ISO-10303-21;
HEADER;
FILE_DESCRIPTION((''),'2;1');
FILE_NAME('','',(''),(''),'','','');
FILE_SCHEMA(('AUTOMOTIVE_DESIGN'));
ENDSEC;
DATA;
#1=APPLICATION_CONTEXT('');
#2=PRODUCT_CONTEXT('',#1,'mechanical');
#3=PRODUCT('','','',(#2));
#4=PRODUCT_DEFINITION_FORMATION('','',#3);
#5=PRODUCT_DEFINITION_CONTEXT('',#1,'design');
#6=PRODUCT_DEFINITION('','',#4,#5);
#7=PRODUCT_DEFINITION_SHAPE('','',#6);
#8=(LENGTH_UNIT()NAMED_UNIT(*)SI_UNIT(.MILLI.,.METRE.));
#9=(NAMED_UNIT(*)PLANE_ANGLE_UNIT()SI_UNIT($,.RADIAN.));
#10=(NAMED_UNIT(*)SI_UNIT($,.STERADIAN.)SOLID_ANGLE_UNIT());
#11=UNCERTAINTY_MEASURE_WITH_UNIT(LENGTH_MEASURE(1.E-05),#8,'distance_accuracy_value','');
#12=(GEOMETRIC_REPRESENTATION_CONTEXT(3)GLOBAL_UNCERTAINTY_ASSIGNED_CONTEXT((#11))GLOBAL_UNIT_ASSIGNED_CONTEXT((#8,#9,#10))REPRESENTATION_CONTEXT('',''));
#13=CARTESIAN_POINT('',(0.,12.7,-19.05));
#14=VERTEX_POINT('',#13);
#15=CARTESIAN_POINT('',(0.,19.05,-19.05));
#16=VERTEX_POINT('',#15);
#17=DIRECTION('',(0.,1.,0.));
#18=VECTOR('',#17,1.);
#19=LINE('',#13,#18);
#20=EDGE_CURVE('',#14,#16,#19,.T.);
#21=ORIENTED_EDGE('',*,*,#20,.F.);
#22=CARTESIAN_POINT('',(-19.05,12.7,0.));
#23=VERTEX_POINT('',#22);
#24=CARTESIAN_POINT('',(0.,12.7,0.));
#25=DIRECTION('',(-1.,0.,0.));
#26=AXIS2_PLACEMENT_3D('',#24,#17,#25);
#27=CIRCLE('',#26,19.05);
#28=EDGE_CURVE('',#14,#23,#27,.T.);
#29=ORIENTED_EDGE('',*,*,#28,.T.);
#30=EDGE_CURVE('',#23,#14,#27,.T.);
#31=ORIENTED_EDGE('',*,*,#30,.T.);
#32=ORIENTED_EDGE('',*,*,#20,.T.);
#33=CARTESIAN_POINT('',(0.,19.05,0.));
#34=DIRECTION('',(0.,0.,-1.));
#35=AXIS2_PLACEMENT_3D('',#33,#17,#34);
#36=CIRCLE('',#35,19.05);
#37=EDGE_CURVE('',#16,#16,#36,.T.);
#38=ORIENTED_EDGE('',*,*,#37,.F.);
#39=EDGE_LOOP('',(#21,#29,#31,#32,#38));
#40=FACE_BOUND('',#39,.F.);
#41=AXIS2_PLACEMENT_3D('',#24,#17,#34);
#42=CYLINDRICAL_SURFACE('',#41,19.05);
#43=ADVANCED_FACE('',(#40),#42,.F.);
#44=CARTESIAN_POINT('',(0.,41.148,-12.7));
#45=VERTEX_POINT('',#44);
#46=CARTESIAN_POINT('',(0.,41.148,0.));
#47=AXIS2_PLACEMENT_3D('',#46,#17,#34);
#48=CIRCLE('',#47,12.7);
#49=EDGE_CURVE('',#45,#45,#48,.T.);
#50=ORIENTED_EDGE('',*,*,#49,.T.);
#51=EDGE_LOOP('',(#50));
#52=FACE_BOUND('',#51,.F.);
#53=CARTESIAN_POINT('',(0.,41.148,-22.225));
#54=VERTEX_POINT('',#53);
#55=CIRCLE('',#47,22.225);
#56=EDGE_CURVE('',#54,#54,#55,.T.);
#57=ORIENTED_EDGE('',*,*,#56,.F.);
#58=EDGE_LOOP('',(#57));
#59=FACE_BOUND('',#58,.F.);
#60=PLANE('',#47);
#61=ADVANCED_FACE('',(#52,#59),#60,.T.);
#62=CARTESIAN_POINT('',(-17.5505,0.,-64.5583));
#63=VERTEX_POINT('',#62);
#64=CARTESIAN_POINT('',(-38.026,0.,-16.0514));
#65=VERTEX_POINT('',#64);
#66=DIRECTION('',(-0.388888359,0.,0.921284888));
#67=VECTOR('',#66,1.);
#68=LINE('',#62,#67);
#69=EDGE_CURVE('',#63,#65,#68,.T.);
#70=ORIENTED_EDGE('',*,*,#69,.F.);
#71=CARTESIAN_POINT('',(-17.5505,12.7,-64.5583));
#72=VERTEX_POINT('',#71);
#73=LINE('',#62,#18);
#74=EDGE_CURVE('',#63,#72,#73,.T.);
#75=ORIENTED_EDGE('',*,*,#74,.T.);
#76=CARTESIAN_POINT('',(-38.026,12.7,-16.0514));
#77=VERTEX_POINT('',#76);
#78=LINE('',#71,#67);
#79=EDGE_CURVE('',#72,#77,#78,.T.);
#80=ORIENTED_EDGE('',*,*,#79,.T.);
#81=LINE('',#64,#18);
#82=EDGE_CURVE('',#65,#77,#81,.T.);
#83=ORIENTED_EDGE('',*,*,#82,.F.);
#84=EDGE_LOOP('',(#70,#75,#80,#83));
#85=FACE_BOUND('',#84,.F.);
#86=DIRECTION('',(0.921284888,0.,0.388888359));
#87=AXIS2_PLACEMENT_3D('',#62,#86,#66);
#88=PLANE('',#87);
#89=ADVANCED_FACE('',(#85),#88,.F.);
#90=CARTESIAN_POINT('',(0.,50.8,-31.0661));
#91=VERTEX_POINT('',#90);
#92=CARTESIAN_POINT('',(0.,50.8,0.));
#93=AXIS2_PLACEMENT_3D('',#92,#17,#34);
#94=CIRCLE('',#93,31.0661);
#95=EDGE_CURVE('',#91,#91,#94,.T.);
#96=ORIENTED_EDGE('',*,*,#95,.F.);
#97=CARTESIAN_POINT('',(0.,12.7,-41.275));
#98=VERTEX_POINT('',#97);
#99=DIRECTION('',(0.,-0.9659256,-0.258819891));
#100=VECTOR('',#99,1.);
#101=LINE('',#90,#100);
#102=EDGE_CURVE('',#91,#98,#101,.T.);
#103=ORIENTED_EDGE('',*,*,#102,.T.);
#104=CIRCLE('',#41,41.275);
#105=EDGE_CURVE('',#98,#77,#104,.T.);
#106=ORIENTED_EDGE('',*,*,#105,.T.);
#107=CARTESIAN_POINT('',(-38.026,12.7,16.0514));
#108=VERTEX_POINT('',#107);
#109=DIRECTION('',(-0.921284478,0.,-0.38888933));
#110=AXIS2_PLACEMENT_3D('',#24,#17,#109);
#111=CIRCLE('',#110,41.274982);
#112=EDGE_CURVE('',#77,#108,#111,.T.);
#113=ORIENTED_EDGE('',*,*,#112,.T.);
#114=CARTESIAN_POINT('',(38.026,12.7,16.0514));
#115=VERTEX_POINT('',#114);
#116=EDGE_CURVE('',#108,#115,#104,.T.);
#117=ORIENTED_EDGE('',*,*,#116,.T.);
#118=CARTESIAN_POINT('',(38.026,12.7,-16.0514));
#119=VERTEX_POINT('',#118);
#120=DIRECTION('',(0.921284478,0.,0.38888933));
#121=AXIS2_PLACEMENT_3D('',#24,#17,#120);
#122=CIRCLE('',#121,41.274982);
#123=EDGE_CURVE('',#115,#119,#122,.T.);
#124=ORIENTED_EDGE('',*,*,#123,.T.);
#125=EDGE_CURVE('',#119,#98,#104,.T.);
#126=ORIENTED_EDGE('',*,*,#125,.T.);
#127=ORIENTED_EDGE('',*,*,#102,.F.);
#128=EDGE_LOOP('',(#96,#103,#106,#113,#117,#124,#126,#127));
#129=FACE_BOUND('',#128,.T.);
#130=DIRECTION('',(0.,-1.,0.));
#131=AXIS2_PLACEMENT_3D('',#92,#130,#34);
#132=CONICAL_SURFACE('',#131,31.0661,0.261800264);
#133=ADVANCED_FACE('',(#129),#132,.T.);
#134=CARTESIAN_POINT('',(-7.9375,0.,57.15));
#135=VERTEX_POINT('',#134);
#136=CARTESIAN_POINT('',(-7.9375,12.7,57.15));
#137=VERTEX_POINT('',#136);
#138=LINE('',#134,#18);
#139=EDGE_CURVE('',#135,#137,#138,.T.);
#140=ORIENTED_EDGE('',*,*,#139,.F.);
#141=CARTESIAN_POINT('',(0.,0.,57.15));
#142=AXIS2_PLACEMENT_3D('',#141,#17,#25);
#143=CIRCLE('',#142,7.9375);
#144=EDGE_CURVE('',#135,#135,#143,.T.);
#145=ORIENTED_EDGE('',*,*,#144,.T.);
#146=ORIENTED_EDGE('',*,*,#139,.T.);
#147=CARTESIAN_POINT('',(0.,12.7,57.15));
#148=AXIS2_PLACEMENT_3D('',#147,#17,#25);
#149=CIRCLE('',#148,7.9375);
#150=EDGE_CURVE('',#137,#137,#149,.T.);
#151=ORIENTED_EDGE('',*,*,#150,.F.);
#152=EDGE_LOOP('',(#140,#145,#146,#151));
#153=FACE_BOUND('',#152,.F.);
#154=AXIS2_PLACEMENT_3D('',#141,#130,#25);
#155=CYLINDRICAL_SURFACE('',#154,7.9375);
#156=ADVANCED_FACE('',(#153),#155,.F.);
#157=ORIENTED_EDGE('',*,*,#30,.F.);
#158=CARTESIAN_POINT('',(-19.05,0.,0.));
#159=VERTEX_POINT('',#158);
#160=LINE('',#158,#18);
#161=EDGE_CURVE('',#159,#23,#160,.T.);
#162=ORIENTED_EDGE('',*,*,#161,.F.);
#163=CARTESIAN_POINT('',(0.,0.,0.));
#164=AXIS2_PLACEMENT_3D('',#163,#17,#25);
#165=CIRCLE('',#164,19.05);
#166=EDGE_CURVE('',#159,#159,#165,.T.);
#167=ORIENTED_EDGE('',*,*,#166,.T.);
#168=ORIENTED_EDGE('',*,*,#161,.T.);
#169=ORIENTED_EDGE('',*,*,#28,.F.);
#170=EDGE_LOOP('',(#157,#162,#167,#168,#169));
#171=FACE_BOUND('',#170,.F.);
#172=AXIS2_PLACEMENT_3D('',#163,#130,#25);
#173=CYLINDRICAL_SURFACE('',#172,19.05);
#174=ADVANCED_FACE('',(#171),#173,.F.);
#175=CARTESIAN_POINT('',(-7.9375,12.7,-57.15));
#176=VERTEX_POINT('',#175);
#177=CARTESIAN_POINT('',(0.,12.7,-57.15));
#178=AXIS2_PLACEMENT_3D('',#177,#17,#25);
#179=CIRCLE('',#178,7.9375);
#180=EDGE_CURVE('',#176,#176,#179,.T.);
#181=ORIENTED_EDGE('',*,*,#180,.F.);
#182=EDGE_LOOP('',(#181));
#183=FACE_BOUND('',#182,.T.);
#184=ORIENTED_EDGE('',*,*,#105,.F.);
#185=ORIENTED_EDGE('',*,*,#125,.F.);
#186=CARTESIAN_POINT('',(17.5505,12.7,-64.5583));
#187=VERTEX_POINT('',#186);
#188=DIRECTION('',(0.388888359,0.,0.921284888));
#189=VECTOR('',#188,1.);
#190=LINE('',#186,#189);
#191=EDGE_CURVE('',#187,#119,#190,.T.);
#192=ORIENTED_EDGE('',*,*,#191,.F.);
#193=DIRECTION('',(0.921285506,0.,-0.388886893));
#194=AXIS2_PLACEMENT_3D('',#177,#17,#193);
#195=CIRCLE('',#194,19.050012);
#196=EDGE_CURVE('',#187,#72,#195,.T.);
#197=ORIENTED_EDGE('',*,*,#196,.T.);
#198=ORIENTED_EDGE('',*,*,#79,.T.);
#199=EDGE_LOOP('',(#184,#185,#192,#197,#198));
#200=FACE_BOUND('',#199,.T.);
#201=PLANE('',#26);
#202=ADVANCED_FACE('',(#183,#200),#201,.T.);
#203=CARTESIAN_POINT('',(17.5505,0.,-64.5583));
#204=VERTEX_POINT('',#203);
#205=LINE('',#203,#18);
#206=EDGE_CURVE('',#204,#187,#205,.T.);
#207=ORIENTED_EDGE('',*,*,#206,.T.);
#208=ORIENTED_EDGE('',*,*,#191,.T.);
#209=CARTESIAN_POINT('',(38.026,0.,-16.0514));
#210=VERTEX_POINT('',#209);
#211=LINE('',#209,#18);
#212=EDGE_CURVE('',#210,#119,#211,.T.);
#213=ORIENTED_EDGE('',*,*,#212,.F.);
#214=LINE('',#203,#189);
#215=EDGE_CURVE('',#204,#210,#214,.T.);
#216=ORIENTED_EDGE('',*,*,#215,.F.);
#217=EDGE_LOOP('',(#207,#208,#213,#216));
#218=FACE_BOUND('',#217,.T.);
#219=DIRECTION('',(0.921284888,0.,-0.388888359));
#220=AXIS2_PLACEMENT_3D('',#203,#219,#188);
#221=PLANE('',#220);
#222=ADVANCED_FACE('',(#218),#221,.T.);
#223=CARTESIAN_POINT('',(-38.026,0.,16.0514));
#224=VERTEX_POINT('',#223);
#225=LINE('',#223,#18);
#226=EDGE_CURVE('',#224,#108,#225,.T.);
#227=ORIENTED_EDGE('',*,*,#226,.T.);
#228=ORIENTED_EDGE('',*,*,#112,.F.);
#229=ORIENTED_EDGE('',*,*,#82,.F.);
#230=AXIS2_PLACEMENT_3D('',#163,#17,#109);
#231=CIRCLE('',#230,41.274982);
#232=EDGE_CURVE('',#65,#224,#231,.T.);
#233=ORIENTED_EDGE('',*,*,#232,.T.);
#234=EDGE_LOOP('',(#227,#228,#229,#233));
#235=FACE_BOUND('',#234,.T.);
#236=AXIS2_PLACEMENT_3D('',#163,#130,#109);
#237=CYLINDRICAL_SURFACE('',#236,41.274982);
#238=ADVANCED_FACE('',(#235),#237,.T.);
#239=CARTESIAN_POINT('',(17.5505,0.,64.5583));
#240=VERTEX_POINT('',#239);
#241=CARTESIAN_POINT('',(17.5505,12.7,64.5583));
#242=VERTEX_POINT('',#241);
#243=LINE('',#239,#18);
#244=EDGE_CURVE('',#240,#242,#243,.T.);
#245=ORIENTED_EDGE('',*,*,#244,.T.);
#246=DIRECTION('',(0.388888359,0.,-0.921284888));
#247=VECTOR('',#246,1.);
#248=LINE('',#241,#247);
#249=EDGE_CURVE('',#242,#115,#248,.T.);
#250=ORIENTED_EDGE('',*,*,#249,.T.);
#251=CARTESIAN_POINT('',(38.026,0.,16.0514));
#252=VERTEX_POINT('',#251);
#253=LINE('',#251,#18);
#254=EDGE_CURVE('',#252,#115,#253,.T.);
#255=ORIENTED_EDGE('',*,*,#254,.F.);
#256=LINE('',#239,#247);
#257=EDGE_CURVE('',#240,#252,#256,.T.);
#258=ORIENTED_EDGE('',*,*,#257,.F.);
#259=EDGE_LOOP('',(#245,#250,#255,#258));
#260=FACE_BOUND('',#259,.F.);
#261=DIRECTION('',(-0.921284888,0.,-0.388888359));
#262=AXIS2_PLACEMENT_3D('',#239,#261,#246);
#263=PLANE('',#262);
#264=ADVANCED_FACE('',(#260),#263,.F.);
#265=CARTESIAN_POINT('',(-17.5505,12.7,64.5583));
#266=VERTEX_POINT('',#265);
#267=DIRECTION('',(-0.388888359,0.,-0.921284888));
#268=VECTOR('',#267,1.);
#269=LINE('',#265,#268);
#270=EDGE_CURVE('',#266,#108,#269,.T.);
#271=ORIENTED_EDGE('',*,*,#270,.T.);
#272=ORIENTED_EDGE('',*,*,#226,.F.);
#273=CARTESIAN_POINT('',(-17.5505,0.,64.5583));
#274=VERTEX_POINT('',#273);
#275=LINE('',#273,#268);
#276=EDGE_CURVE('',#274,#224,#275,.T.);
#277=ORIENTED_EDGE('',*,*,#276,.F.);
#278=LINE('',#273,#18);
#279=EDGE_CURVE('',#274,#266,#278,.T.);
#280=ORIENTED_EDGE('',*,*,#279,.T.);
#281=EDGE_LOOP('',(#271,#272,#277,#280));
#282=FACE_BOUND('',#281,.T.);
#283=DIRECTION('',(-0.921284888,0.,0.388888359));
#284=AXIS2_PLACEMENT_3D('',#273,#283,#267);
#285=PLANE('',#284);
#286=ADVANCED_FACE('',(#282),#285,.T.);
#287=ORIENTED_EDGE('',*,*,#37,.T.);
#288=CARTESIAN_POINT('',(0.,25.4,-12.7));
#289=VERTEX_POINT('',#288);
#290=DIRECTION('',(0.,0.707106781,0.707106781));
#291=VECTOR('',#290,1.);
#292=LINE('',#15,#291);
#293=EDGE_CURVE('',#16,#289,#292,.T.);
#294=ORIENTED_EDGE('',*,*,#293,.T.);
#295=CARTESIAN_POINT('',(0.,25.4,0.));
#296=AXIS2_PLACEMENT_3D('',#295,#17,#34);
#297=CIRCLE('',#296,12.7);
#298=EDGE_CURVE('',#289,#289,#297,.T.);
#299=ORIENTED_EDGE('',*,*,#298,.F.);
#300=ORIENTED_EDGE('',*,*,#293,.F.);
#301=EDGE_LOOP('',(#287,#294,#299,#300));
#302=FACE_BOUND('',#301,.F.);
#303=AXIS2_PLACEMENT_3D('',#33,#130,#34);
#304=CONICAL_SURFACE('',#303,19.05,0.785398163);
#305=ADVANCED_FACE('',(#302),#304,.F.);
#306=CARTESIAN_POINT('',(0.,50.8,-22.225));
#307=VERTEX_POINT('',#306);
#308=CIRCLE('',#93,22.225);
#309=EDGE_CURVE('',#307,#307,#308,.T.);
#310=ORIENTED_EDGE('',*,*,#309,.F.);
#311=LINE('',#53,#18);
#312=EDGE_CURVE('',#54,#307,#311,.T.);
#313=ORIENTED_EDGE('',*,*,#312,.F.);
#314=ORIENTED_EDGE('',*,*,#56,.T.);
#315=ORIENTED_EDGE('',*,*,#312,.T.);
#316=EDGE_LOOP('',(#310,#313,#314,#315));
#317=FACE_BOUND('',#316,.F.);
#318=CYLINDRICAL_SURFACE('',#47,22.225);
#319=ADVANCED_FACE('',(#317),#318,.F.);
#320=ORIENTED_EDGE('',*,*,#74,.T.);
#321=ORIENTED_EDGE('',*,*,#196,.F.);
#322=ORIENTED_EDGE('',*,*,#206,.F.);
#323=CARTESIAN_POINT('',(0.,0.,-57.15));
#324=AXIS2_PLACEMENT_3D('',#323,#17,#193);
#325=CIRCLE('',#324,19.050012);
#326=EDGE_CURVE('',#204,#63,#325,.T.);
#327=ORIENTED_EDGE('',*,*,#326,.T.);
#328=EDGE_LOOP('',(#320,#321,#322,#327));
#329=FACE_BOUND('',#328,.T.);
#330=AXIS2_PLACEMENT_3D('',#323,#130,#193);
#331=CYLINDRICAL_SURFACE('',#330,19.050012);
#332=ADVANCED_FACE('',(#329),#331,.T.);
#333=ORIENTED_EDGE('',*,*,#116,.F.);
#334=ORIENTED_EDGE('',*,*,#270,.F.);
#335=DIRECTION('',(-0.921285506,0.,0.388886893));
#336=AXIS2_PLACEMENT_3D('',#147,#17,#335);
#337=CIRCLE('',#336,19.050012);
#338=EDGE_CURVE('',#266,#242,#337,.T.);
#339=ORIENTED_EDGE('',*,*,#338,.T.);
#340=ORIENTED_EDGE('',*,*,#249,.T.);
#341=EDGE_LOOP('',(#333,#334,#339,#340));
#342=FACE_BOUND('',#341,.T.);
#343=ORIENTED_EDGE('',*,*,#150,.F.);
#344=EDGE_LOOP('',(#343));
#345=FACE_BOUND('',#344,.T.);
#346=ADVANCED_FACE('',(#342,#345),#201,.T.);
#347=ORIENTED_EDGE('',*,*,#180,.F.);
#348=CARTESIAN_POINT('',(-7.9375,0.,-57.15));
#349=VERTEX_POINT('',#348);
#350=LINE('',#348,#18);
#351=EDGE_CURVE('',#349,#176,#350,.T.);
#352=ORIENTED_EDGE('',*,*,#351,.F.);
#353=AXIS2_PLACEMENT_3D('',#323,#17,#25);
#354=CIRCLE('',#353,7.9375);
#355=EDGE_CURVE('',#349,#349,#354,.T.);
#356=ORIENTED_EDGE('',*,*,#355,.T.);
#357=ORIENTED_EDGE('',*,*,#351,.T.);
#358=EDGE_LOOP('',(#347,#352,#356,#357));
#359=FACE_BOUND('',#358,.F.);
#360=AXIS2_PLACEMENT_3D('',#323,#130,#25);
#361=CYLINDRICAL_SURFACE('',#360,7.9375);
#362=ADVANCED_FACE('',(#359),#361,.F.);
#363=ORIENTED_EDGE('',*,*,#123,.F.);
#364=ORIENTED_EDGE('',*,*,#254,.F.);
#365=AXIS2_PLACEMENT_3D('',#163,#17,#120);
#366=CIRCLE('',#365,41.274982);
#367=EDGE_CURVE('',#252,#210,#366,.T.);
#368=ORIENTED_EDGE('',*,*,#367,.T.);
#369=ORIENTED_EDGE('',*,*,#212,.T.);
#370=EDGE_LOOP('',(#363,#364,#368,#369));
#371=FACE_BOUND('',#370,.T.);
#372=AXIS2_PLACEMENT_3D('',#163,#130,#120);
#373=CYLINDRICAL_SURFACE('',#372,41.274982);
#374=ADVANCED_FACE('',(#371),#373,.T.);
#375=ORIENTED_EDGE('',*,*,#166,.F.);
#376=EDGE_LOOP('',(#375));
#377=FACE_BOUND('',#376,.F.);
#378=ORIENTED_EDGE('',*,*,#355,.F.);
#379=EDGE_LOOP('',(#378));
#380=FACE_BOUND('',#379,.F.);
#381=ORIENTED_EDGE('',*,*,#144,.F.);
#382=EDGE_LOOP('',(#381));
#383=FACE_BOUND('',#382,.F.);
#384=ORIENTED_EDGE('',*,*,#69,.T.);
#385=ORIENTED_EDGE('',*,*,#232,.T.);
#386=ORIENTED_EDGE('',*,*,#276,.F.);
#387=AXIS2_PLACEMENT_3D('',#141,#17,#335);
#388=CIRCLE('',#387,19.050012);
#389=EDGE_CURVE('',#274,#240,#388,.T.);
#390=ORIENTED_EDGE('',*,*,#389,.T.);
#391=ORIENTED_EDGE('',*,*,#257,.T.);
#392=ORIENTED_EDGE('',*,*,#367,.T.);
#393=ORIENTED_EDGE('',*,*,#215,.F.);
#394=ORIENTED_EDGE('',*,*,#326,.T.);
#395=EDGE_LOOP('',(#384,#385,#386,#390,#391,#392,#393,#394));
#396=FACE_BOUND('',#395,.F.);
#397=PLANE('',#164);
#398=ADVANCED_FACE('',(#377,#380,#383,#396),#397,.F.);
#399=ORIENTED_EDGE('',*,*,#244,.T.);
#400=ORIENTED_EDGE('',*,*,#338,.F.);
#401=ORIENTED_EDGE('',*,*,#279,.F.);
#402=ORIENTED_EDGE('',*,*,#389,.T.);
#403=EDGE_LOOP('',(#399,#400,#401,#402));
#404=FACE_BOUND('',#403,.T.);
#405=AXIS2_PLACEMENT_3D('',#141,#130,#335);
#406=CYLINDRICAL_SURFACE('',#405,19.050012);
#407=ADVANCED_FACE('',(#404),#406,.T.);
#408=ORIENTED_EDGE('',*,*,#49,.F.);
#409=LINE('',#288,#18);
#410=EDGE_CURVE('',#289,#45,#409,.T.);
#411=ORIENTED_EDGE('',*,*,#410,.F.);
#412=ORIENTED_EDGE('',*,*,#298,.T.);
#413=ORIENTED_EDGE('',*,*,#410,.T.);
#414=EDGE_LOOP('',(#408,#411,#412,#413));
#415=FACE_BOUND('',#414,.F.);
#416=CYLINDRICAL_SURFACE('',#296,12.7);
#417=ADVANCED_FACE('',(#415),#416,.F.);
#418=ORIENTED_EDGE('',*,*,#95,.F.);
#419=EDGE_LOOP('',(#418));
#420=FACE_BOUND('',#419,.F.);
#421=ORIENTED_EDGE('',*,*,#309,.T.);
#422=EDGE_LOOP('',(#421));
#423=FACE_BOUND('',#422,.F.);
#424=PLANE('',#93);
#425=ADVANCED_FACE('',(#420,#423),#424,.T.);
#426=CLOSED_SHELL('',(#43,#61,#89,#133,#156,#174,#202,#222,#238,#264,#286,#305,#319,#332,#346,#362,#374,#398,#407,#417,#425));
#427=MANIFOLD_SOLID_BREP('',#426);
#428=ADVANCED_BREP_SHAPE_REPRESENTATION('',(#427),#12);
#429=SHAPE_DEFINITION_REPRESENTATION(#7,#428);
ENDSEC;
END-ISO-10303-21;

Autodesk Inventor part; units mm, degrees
ref_plane "YZ Plane" through (0, 0, 0) normal (1, 0, 0) x (0, 1, 0)
ref_plane "XZ Plane" through (0, 0, 0) normal (0, 1, 0) x (-1, 0, 0)
ref_plane "XY Plane" through (0, 0, 0) normal (0, 0, 1) x (1, 0, 0)
sketch "Sketch1" plane through (0, 0, 0) normal (0, 1, 0) x (-1, 0, 0)
  circle A0 centre (0, 0) radius 19.05
  circle A1 centre (0, 0) radius 41.275 construction
  line L0 (0, -57.15) -> (0, 57.15) construction
  circle A2 centre (0, -57.15) radius 7.9375
  line L1 (57.785, 0) -> (-57.785, 0) construction
  circle A3 centre (0, -57.15) radius 19.05 construction
  circle A4 centre (0, 57.15) radius 7.9375
  circle A5 centre (0, 57.15) radius 19.05 construction
  line L2 (-17.5505, -64.5583) -> (-38.026, -16.0514)
  line L3 (17.5505, -64.5583) -> (38.026, -16.0514)
  line L4 (-17.5505, 64.5583) -> (-38.026, 16.0514)
  line L5 (17.5505, 64.5583) -> (38.026, 16.0514)
  arc A6 (-17.5505, -64.5583) -> (17.5505, -64.5583) centre (0, -57.15) ccw
  arc A7 (17.5505, 64.5583) -> (-17.5505, 64.5583) centre (0, 57.15) ccw
  arc A8 (-38.026, 16.0514) -> (-38.026, -16.0514) centre (0, 0) ccw
  arc A9 (38.026, -16.0514) -> (38.026, 16.0514) centre (0, 0) ccw
  dimension "d1" = 82.55
  dimension "d4" = 38.1
  dimension "d0" = 38.1
  dimension "d2" = 114.3
  dimension "d3" = 15.875
extrude "Extrusion1" add sketch "Sketch1" along normal blind 12.7
sketch "Sketch2" plane through (0, 0, 0) normal (1, 0, 0) x (0, 1, 0)
  line L0 (0, -19.05) -> (12.7, -19.05) construction
  line L1 (12.7, -19.05) -> (19.05, -19.05)
  line L2 (19.05, -19.05) -> (25.4, -12.7)
  line L3 (25.4, -12.7) -> (41.148, -12.7)
  line L4 (41.148, -12.7) -> (41.148, -22.225)
  line L5 (41.148, -22.225) -> (50.8, -22.225)
  line L6 (50.8, -22.225) -> (50.8, -31.0661)
  line L7 (50.8, -31.0661) -> (12.7, -41.275)
  line L8 (12.7, -64.5583) -> (12.7, -16.0514) construction
  line L9 (0, -16.0514) -> (0, -64.5583) construction
  line L10 (12.7, -19.05) -> (12.7, -41.275)
  line L11 (12.7, -19.05) -> (12.7, -41.275)
  line L12 (12.7, -41.275) -> (50.8, -31.0661)
  line L13 (50.8, -31.0661) -> (50.8, -22.225)
  line L14 (41.148, -22.225) -> (50.8, -22.225)
  line L15 (41.148, -22.225) -> (41.148, -12.7)
  line L16 (41.148, -12.7) -> (25.4, -12.7)
  line L17 (25.4, -12.7) -> (19.05, -19.05)
  line L18 (19.05, -19.05) -> (12.7, -19.05)
  line L19 (12.7, -41.275) -> (28.7707, -41.275) construction
  line L20 (-10.16, 0) -> (60.96, 0) construction
  point P0 (0, 0)
  dimension "d7" = 50.8
  dimension "d8" = 19.05
  dimension "d9" = 12.7
  dimension "d10" = 41.275
  dimension "d12" = 22.225
  dimension "d13" = 9.652
  dimension "d14" = 25.4
  dimension "d16" = 15
revolve "Revolution1" add sketch "Sketch2" angle 360 about axis through (0, -10, 0) along (0, 1, 0)
properties part number "SólidoC"
